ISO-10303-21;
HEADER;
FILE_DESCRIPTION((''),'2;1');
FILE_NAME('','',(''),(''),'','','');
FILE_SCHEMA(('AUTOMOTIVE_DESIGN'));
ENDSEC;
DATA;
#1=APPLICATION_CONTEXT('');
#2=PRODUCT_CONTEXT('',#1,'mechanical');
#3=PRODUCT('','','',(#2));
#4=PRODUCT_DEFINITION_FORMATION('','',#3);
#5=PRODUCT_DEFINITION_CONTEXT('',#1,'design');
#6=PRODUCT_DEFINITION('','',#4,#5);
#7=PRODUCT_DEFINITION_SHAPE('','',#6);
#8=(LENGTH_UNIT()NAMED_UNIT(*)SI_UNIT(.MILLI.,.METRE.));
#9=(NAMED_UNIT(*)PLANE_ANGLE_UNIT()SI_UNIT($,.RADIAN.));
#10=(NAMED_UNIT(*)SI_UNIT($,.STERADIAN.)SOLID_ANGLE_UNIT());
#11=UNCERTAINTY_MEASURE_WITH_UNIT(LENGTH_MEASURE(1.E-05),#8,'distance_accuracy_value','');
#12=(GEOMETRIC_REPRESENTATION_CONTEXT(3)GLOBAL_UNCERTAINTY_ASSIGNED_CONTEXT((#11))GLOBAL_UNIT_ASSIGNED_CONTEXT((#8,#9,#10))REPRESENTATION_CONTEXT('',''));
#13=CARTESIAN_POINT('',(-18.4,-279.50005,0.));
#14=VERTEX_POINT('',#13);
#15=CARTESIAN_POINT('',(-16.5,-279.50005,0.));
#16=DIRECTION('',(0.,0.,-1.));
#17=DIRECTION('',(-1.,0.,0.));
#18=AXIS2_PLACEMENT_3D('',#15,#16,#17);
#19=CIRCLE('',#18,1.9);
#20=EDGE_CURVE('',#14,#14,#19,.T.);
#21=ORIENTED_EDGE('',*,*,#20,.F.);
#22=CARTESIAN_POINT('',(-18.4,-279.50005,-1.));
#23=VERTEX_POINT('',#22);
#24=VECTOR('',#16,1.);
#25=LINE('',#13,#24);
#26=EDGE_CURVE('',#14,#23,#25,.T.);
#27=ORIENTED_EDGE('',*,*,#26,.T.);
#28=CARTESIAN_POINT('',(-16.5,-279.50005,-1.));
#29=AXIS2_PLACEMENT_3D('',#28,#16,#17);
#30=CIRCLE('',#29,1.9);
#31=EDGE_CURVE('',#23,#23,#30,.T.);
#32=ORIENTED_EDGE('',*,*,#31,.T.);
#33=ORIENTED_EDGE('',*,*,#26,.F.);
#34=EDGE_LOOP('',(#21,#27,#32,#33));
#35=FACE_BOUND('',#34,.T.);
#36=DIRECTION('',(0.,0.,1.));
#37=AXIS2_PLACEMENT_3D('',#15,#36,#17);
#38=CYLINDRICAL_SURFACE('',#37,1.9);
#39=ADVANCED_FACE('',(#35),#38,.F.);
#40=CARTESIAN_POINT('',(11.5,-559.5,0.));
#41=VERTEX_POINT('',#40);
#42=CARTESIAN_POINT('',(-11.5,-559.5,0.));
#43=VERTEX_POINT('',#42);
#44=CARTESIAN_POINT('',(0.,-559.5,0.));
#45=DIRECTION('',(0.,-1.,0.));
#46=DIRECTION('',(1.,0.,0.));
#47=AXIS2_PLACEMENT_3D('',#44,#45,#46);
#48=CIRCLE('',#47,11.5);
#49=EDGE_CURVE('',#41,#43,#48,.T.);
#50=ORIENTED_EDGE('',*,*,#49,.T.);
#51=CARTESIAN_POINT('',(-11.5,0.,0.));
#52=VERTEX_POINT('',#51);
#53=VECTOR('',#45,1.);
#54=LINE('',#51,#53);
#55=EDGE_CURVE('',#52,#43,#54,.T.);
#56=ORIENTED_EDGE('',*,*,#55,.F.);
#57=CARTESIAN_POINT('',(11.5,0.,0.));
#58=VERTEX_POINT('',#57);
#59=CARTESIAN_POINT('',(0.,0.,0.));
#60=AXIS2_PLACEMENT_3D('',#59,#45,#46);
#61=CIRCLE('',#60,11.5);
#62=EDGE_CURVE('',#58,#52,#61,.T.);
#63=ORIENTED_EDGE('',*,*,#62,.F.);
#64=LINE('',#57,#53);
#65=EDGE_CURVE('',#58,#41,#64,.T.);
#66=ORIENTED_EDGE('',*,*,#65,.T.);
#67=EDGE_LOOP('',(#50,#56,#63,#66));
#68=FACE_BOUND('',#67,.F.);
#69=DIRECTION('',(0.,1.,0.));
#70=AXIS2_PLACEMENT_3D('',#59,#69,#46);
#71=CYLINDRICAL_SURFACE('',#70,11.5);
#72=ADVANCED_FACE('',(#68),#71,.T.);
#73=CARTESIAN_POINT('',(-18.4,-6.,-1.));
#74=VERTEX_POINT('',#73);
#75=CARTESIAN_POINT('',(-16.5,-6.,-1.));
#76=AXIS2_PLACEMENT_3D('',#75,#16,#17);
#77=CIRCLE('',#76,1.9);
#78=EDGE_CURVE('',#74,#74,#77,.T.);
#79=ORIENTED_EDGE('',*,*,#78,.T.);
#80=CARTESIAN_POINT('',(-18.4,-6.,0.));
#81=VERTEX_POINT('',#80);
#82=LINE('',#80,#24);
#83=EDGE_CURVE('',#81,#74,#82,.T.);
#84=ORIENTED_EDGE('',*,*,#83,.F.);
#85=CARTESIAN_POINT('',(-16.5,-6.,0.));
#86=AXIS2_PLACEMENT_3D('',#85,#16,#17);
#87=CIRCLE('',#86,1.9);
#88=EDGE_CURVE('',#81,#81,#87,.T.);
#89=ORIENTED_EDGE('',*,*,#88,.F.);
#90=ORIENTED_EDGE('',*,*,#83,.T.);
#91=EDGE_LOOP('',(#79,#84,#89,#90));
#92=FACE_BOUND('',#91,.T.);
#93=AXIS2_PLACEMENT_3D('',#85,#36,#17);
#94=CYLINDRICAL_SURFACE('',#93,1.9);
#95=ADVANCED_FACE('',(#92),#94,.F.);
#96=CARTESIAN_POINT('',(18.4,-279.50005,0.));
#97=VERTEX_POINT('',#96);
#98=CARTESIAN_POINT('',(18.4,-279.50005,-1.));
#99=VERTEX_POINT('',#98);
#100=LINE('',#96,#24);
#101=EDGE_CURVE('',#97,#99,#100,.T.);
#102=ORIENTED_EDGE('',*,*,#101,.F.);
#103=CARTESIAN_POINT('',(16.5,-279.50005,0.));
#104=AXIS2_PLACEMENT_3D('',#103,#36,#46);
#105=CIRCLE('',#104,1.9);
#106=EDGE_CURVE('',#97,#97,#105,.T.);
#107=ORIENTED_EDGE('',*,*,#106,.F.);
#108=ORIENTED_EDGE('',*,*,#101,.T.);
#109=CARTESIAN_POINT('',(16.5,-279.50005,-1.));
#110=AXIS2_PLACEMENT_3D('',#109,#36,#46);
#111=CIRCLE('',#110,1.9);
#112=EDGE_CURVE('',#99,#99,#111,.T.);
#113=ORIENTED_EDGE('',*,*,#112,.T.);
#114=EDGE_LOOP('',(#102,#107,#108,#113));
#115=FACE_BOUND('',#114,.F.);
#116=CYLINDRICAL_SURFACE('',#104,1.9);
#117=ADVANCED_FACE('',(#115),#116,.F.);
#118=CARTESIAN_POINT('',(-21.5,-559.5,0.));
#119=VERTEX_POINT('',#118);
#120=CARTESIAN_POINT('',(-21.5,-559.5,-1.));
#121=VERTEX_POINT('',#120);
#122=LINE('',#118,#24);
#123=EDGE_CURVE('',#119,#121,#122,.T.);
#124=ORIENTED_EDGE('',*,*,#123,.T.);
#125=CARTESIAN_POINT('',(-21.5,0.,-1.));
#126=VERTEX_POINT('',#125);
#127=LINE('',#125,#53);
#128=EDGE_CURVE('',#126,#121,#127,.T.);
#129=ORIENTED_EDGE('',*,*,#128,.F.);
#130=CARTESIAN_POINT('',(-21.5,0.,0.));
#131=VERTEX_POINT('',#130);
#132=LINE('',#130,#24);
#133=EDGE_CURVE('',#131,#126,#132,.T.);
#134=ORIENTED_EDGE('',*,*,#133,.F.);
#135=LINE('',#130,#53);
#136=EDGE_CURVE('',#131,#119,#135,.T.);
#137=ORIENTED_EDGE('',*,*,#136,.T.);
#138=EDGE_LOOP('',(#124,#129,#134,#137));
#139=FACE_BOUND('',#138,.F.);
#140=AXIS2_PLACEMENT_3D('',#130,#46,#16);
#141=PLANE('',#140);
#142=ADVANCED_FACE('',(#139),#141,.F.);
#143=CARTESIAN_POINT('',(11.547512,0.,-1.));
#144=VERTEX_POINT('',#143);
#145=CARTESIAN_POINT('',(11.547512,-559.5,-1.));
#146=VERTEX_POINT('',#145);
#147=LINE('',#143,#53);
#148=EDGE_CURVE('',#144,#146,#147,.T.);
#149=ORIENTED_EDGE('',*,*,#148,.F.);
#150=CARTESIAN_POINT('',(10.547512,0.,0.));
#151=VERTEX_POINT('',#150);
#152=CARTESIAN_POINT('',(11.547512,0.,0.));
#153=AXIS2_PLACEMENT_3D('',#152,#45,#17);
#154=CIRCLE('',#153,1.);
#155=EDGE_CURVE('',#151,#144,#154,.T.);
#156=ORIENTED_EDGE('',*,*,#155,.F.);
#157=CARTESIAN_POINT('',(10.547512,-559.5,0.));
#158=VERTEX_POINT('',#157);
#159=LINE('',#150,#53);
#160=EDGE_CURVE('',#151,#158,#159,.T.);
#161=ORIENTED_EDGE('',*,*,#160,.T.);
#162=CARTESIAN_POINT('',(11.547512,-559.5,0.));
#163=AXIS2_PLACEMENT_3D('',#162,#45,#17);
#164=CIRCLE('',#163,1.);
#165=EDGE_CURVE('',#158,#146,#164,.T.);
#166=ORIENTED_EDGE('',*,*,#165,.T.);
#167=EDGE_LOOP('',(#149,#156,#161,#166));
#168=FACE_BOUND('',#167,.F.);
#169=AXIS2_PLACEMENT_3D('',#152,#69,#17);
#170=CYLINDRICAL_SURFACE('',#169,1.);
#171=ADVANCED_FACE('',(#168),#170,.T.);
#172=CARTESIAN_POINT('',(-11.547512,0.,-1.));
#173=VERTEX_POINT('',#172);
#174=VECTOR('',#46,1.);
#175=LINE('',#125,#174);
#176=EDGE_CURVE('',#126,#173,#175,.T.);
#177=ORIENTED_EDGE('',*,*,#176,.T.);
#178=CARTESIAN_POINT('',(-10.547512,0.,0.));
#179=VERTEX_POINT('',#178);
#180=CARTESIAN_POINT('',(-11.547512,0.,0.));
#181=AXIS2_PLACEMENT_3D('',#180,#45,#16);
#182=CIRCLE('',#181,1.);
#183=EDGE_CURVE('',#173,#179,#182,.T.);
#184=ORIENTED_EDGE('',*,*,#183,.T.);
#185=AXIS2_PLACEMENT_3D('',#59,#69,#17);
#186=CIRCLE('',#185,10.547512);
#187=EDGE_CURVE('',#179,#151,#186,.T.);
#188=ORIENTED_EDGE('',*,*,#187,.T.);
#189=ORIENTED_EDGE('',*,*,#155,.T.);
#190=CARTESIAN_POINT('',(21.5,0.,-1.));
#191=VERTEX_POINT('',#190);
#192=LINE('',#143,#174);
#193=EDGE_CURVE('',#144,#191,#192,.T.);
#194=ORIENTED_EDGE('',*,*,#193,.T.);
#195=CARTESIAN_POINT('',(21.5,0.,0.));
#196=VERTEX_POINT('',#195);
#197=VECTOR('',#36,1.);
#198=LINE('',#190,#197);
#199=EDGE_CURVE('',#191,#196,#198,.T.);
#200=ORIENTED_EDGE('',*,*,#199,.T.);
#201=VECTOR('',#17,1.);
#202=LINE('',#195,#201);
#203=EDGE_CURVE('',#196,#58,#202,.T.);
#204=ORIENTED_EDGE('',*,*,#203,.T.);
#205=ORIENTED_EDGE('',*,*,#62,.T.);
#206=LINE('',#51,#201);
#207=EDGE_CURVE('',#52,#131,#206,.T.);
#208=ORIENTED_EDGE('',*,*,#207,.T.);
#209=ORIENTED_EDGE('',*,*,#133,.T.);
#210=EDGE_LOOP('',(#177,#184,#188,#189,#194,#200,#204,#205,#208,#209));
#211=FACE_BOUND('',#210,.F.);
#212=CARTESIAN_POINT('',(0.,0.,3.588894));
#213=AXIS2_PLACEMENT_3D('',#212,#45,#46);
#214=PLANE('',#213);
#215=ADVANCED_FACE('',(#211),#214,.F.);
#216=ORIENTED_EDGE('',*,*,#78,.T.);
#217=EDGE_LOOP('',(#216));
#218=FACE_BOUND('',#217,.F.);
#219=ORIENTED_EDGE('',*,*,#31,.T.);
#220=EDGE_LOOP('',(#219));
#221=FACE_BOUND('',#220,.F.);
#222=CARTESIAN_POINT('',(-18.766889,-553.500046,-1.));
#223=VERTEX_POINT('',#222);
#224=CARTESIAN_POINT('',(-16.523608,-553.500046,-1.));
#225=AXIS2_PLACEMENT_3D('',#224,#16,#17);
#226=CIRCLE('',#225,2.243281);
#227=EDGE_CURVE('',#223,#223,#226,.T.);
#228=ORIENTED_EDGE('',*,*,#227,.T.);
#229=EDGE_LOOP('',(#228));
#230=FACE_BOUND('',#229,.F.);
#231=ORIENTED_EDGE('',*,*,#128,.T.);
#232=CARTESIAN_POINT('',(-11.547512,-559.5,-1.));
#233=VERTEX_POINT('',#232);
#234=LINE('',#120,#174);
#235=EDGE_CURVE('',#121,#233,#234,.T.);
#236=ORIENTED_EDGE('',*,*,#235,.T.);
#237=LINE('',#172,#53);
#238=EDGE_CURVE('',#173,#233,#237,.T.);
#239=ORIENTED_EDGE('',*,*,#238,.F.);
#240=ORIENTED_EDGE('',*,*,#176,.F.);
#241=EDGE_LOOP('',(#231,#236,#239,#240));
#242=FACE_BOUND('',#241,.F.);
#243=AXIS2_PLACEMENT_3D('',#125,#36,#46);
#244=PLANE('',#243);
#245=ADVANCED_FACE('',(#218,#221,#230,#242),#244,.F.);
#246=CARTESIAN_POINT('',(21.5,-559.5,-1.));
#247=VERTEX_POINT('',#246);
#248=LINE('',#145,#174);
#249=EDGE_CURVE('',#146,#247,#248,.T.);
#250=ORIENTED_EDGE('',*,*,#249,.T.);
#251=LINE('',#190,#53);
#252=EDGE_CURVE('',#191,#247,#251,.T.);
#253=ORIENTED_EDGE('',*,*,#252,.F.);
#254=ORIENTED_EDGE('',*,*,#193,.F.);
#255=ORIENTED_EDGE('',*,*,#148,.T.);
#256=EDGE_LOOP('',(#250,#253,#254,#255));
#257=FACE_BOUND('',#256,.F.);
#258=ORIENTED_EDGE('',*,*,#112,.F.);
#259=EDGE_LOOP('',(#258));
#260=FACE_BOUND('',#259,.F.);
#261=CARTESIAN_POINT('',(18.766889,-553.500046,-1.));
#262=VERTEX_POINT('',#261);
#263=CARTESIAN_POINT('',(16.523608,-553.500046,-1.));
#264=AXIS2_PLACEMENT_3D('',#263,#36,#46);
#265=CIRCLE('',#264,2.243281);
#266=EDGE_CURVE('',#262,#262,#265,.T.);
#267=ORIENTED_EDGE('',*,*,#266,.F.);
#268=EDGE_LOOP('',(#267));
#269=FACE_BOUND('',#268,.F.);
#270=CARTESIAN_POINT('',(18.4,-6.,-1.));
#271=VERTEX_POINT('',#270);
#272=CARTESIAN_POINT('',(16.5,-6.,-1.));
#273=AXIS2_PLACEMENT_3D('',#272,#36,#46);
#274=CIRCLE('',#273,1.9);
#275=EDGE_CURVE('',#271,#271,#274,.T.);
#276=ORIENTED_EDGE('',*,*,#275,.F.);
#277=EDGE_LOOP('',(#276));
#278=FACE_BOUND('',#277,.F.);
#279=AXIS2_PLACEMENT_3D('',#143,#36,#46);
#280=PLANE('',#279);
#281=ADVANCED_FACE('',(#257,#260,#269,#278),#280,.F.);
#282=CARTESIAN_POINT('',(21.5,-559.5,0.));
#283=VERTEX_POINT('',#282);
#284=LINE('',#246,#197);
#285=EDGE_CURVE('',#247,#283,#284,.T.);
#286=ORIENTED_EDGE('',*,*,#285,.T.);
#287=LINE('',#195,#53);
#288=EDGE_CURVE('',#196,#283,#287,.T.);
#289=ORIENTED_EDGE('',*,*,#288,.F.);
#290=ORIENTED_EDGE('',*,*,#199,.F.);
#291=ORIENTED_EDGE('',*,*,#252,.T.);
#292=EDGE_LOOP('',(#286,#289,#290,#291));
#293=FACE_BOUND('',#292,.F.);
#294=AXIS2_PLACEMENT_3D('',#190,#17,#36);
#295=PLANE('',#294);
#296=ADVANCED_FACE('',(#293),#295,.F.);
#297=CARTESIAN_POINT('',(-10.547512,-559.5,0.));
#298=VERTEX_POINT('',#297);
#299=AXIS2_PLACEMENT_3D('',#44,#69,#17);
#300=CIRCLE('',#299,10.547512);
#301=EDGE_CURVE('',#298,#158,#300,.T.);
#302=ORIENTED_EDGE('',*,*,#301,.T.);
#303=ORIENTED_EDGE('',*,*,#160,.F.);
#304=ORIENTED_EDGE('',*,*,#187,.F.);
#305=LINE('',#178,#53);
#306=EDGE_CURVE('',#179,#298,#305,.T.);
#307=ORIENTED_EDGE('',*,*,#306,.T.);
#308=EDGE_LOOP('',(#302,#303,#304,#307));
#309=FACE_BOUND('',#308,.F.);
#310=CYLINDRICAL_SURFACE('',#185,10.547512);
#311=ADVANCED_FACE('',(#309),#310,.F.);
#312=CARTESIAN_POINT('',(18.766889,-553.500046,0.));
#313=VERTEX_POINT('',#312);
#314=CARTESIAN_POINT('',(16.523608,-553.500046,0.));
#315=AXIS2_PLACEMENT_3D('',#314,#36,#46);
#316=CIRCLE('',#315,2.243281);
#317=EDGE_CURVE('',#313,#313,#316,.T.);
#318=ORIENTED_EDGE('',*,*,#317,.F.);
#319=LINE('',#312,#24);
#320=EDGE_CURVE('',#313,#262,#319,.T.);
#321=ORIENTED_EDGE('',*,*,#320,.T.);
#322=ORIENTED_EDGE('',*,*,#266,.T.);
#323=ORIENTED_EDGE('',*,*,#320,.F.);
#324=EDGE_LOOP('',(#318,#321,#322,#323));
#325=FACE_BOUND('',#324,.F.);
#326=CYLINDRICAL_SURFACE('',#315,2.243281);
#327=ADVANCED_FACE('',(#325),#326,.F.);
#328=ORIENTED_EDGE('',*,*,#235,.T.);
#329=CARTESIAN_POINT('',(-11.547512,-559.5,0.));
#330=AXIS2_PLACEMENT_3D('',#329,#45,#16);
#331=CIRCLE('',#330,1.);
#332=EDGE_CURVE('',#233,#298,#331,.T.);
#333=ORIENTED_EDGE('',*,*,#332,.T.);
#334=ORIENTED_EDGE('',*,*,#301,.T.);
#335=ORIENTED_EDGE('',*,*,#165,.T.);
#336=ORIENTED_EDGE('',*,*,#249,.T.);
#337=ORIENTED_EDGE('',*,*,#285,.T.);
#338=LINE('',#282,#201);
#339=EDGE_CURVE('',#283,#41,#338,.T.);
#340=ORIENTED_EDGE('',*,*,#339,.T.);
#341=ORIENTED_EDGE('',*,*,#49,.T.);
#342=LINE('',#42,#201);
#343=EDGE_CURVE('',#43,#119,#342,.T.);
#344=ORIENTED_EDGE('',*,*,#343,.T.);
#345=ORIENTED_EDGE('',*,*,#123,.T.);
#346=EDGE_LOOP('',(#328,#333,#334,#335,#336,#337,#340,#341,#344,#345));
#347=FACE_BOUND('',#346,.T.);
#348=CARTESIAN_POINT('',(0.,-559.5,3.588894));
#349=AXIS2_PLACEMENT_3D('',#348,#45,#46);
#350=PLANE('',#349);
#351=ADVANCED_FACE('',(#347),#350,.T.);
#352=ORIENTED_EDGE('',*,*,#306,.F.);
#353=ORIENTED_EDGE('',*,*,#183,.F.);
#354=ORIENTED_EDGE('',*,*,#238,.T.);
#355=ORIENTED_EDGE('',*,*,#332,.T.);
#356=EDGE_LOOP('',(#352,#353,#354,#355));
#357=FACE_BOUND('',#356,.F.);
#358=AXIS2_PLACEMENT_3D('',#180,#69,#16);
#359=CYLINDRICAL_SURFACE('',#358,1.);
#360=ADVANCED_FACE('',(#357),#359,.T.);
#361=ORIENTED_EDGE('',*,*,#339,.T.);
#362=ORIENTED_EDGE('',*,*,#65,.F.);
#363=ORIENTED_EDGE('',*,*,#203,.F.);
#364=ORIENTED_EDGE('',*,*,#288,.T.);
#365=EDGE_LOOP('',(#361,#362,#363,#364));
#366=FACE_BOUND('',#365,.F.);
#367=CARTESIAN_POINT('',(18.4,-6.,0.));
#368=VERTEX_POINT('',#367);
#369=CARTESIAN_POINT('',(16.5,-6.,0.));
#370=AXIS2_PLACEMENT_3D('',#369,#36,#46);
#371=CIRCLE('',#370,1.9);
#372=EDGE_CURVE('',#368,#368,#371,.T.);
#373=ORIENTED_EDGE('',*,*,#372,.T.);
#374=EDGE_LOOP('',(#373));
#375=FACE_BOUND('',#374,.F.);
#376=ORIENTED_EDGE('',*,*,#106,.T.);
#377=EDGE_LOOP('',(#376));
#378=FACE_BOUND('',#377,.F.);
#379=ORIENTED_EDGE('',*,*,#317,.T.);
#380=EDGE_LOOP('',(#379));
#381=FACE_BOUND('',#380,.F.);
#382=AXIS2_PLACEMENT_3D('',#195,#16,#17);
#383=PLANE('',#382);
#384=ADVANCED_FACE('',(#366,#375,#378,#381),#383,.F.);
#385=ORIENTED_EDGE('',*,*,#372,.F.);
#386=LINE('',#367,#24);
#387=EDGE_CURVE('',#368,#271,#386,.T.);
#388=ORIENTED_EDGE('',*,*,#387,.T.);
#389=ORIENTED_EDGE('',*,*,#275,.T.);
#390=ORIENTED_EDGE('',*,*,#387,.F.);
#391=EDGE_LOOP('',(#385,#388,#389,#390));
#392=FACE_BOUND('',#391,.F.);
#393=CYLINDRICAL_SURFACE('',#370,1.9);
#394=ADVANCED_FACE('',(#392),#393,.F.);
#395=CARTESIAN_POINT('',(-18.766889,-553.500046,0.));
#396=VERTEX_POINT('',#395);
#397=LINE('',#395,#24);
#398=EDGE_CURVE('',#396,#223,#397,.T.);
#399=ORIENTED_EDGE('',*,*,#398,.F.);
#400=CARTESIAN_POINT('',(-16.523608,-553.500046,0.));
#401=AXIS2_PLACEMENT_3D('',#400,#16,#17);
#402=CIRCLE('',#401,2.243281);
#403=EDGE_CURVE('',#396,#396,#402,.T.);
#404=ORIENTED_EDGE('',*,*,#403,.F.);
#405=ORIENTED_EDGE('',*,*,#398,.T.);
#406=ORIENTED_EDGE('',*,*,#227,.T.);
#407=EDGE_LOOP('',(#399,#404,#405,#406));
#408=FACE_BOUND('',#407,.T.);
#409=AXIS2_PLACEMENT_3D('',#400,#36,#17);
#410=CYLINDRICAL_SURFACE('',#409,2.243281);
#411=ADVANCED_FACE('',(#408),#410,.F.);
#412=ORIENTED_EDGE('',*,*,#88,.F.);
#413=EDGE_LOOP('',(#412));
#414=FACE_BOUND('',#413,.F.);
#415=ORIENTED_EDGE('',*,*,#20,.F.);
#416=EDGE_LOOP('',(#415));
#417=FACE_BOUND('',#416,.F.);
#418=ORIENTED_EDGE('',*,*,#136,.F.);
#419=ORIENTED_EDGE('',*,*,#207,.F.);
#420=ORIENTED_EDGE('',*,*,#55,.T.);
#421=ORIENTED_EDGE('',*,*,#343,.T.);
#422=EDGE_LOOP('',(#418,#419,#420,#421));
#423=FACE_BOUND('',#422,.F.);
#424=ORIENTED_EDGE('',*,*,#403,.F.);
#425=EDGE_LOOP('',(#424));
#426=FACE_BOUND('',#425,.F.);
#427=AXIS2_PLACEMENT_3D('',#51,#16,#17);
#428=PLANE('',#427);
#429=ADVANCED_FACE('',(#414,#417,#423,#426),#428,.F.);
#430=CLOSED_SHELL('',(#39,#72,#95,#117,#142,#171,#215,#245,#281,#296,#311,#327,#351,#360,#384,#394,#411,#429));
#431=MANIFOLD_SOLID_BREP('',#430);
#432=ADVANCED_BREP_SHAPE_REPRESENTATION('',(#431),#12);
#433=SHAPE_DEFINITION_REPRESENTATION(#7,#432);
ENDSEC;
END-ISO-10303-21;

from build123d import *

# Parameters (mm, degrees)
F1_DEPTH = 559.5
F2_R     = 1.9
F2_R_2   = 2.2432813823
F3_DEPTH = 1


# Not quite as in the source:
# - a pattern or mirror of a feature is missing from the dataset's text; its kind, count and spacing are read off the source's solid
# - a feature names something its author has since deleted; it is built from what else it names


with BuildPart() as f1:
    # F0 (on Front) → F1 (new body)
    with BuildSketch(Plane.XZ):
        with BuildLine():
            Line((-21.5, 0), (-21.5, -1))
            Line((-21.5, -1), (-11.5475115549, -1))
            ThreePointArc((-11.5475115549, -1), (-10.8404047737, -0.7071067812), (-10.5475115549, 0))
            ThreePointArc((-10.5475115549, 0), (0, 10.5475115549), (10.5475115549, 0))
            ThreePointArc((10.5475115549, 0), (10.8404047737, -0.7071067812), (11.5475115549, -1))
            Line((11.5475115549, -1), (21.5, -1))
            Line((21.5, -1), (21.5, 0))
            Line((21.5, 0), (11.5, 0))
            ThreePointArc((11.5, 0), (0, 11.5), (-11.5, 0))
            Line((-11.5, 0), (-21.5, 0))
        make_face()
    extrude(amount=F1_DEPTH)

    # F2 (on face) → F3 (cut, through all)
    with BuildSketch(Plane.XY):
        with Locations((16.5, -279.50005)):
            Circle(F2_R)
        with Locations((16.5, -6)):
            Circle(F2_R)
        with Locations((16.5236079696, -553.5000464449)):
            Circle(F2_R_2)
    f3 = extrude(amount=-F3_DEPTH, mode=Mode.SUBTRACT)

    # F3_copies: F3 across plane
    add(f3.mirror(Plane(origin=(0, 0, 0), x_dir=(0, 0, -1), z_dir=(-1, 0, 0))), mode=Mode.SUBTRACT)


solid = f1.part
